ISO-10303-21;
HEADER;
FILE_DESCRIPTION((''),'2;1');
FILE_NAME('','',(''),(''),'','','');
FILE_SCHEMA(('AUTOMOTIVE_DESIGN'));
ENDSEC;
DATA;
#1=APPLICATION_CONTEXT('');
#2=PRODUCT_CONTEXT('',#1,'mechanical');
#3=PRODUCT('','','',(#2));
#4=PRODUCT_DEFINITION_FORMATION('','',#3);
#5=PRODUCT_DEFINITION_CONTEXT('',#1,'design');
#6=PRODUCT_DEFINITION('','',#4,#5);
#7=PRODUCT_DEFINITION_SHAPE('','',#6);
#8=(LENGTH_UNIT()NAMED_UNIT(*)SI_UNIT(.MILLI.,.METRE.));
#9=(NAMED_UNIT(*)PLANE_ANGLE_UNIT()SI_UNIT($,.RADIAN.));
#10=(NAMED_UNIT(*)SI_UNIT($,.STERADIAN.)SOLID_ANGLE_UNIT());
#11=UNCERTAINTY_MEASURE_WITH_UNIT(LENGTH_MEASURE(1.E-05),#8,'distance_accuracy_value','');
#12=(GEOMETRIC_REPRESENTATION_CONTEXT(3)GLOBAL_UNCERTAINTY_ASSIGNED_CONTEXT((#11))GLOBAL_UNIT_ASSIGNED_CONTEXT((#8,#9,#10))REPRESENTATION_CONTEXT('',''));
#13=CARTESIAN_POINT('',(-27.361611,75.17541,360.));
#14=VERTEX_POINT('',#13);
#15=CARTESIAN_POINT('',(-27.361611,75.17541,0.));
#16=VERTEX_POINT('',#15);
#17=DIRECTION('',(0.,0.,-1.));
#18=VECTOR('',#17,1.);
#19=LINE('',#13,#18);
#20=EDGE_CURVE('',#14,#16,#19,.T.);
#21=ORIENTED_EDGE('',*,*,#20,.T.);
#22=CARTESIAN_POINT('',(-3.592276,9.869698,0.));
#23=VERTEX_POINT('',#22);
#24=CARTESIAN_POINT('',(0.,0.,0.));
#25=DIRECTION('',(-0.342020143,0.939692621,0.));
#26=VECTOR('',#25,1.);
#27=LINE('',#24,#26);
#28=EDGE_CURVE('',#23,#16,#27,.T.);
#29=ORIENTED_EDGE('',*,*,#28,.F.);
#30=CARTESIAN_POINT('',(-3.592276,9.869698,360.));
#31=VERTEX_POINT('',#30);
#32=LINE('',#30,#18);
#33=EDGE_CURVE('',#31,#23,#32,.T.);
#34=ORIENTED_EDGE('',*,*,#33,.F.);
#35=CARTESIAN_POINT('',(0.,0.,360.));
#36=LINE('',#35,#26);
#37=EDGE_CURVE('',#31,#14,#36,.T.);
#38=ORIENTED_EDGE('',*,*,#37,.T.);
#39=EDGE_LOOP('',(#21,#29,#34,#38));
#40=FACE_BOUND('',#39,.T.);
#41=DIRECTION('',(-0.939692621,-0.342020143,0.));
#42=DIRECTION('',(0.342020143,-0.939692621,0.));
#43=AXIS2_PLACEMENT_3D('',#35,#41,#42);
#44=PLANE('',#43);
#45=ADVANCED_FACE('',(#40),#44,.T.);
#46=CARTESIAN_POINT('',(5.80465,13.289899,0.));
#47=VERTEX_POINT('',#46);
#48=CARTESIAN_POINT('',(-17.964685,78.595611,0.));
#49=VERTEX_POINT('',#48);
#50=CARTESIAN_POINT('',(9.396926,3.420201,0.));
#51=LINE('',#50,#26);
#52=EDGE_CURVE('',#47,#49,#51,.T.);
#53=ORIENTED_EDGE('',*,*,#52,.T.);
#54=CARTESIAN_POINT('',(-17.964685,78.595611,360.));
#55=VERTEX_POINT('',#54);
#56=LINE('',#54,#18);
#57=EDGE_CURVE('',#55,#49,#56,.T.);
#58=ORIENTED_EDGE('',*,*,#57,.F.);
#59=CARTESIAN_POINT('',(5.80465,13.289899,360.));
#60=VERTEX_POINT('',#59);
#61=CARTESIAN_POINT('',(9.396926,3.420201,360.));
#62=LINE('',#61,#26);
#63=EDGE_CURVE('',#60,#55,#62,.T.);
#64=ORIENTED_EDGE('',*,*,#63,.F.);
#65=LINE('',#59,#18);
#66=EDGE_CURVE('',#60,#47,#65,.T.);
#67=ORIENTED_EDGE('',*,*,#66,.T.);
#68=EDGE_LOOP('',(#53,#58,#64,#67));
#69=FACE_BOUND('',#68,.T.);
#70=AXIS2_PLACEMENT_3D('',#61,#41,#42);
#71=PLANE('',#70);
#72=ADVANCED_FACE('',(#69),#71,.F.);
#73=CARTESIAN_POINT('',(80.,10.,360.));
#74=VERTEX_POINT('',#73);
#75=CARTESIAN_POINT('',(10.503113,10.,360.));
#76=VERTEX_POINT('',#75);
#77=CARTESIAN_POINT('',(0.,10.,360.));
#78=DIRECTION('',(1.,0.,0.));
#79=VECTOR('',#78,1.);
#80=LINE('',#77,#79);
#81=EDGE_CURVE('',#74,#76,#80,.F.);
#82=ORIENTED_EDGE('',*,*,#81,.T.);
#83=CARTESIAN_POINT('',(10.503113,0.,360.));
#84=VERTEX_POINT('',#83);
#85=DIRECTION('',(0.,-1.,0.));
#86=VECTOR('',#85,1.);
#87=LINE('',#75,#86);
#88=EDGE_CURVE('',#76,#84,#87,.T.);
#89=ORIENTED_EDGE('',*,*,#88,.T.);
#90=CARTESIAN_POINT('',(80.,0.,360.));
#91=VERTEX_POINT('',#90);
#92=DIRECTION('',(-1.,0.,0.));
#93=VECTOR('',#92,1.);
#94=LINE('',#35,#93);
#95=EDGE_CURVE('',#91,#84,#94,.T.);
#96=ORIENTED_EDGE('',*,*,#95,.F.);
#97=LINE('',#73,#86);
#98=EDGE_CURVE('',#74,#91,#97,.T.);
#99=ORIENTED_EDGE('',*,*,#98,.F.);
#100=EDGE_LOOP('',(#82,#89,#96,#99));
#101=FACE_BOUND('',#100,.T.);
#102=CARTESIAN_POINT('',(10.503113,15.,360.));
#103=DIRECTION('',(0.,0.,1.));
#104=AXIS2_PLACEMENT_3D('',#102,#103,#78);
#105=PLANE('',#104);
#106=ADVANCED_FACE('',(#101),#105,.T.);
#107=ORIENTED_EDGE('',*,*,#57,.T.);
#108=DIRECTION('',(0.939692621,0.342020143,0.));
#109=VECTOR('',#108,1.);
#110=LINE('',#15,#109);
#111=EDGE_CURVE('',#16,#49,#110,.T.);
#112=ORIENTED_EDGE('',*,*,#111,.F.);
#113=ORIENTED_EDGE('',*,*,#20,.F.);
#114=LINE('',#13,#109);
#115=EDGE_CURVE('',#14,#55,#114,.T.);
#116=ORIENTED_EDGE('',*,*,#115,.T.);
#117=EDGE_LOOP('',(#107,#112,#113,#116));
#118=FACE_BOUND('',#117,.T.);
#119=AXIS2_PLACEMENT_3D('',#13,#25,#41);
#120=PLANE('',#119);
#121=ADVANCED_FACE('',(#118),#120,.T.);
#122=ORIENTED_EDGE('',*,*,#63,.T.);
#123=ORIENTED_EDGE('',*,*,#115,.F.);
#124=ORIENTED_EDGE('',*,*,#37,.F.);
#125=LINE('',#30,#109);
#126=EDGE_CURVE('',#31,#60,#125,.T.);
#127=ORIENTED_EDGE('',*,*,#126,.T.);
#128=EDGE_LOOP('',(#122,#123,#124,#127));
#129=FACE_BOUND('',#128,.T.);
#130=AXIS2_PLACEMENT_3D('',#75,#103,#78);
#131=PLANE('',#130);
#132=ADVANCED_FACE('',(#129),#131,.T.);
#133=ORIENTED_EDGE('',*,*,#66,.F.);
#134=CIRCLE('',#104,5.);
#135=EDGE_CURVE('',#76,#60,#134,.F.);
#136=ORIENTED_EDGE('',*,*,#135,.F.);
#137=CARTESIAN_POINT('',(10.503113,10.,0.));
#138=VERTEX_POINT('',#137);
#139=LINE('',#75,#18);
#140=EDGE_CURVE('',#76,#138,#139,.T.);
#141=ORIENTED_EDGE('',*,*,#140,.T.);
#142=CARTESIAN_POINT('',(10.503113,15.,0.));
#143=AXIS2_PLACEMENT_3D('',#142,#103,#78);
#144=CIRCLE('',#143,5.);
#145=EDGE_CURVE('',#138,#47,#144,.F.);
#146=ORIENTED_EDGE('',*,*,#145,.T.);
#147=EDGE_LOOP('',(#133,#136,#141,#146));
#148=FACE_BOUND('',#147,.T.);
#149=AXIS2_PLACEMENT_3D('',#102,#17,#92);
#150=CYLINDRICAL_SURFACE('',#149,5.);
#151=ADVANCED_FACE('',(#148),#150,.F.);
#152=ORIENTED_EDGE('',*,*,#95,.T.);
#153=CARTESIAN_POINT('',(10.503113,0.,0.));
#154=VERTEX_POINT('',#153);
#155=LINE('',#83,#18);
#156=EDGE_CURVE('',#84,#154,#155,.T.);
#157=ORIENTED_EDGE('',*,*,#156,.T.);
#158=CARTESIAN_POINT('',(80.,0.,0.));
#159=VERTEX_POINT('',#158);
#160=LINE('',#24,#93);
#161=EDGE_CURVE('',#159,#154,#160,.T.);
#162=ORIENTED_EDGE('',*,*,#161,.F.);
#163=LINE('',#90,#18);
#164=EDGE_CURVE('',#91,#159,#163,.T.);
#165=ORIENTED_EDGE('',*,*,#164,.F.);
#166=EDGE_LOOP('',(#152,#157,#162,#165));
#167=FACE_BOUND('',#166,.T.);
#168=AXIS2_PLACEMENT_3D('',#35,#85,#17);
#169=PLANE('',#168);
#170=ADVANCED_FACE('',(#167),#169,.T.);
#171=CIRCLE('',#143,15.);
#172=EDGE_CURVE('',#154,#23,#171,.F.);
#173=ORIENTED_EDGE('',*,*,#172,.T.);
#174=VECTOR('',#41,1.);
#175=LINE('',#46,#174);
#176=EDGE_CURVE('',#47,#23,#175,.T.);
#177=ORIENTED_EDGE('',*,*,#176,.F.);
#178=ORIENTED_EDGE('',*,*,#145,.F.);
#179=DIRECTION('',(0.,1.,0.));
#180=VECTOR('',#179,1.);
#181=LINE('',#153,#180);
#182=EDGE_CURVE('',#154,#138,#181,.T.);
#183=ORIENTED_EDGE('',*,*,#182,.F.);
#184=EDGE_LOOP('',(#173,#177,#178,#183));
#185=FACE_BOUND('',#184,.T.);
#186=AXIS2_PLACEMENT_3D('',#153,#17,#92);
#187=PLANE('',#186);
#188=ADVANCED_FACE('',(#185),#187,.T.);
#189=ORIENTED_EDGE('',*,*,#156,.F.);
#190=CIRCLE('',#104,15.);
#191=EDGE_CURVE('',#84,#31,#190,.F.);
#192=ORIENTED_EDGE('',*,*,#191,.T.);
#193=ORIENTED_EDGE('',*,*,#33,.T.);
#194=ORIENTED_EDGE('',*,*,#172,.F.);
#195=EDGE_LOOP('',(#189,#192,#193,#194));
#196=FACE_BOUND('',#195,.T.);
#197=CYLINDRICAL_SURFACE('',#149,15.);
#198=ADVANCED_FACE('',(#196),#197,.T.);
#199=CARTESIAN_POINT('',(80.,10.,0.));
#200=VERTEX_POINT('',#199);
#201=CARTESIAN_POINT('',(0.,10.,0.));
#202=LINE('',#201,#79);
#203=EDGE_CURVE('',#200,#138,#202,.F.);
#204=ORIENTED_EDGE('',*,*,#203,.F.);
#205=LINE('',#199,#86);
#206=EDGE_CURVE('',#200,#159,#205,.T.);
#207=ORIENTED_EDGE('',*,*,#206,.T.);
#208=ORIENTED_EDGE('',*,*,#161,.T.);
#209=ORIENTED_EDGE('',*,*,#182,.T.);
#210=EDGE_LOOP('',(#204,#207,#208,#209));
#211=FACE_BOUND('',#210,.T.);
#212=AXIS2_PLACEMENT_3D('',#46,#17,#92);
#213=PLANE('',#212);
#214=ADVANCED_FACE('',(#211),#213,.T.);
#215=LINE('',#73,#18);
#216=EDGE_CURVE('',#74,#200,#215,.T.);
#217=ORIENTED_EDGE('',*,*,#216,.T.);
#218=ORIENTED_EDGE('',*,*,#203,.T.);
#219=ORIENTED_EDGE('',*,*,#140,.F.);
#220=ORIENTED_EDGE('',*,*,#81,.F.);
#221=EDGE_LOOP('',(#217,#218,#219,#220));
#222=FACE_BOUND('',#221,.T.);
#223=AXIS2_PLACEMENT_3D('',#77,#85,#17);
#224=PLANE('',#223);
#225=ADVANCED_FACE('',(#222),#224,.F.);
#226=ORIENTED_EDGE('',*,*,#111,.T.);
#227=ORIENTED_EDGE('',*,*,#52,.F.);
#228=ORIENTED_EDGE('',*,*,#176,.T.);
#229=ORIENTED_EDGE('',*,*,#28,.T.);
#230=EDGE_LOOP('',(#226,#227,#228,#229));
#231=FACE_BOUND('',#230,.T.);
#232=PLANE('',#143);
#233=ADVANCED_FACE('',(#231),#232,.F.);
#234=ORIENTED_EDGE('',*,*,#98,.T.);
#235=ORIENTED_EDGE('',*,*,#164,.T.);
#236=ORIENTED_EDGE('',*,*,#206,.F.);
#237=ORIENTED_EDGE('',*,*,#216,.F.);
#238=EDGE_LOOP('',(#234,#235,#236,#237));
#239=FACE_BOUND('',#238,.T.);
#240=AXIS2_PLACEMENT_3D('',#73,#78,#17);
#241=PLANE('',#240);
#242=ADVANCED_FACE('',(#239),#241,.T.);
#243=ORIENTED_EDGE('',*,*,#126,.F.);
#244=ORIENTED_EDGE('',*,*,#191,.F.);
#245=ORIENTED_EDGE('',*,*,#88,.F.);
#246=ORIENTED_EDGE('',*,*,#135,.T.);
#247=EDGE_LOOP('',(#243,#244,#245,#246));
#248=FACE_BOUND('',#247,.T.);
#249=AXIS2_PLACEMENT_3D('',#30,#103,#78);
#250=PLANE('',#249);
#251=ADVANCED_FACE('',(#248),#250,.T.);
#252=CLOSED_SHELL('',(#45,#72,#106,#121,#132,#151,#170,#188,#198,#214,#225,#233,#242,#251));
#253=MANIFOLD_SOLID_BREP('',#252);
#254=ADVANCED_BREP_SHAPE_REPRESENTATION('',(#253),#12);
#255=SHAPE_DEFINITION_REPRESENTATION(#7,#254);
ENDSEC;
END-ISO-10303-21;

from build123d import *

# Parameters (mm, degrees)
T_LE_DE_BASE_PLI_E1_DEPTH = 360


# Sheet-metal steps are written as plain solids
with BuildPart() as part:
    # Esquisse1 → Tôle de base pliée1 (new body)
    with BuildSketch(Plane.XY):
        with BuildLine():
            Line((-27.361611466, 75.175409663), (-3.592276239, 9.86969785))
            ThreePointArc((-3.592276239, 9.86969785), (1.899466528, 2.712719336), (10.503113073, 0))
            Line((10.503113073, 0), (80, 0))
            Line((80, 0), (80, 10))
            Line((80, 10), (10.503113073, 10))
            ThreePointArc((10.503113073, 10), (7.635230891, 10.904239779), (5.804649969, 13.289899283))
            Line((5.804649969, 13.289899283), (-17.964685258, 78.595611096))
            Line((-17.964685258, 78.595611096), (-27.361611466, 75.175409663))
        make_face()
    extrude(amount=T_LE_DE_BASE_PLI_E1_DEPTH)


solid = part.part
